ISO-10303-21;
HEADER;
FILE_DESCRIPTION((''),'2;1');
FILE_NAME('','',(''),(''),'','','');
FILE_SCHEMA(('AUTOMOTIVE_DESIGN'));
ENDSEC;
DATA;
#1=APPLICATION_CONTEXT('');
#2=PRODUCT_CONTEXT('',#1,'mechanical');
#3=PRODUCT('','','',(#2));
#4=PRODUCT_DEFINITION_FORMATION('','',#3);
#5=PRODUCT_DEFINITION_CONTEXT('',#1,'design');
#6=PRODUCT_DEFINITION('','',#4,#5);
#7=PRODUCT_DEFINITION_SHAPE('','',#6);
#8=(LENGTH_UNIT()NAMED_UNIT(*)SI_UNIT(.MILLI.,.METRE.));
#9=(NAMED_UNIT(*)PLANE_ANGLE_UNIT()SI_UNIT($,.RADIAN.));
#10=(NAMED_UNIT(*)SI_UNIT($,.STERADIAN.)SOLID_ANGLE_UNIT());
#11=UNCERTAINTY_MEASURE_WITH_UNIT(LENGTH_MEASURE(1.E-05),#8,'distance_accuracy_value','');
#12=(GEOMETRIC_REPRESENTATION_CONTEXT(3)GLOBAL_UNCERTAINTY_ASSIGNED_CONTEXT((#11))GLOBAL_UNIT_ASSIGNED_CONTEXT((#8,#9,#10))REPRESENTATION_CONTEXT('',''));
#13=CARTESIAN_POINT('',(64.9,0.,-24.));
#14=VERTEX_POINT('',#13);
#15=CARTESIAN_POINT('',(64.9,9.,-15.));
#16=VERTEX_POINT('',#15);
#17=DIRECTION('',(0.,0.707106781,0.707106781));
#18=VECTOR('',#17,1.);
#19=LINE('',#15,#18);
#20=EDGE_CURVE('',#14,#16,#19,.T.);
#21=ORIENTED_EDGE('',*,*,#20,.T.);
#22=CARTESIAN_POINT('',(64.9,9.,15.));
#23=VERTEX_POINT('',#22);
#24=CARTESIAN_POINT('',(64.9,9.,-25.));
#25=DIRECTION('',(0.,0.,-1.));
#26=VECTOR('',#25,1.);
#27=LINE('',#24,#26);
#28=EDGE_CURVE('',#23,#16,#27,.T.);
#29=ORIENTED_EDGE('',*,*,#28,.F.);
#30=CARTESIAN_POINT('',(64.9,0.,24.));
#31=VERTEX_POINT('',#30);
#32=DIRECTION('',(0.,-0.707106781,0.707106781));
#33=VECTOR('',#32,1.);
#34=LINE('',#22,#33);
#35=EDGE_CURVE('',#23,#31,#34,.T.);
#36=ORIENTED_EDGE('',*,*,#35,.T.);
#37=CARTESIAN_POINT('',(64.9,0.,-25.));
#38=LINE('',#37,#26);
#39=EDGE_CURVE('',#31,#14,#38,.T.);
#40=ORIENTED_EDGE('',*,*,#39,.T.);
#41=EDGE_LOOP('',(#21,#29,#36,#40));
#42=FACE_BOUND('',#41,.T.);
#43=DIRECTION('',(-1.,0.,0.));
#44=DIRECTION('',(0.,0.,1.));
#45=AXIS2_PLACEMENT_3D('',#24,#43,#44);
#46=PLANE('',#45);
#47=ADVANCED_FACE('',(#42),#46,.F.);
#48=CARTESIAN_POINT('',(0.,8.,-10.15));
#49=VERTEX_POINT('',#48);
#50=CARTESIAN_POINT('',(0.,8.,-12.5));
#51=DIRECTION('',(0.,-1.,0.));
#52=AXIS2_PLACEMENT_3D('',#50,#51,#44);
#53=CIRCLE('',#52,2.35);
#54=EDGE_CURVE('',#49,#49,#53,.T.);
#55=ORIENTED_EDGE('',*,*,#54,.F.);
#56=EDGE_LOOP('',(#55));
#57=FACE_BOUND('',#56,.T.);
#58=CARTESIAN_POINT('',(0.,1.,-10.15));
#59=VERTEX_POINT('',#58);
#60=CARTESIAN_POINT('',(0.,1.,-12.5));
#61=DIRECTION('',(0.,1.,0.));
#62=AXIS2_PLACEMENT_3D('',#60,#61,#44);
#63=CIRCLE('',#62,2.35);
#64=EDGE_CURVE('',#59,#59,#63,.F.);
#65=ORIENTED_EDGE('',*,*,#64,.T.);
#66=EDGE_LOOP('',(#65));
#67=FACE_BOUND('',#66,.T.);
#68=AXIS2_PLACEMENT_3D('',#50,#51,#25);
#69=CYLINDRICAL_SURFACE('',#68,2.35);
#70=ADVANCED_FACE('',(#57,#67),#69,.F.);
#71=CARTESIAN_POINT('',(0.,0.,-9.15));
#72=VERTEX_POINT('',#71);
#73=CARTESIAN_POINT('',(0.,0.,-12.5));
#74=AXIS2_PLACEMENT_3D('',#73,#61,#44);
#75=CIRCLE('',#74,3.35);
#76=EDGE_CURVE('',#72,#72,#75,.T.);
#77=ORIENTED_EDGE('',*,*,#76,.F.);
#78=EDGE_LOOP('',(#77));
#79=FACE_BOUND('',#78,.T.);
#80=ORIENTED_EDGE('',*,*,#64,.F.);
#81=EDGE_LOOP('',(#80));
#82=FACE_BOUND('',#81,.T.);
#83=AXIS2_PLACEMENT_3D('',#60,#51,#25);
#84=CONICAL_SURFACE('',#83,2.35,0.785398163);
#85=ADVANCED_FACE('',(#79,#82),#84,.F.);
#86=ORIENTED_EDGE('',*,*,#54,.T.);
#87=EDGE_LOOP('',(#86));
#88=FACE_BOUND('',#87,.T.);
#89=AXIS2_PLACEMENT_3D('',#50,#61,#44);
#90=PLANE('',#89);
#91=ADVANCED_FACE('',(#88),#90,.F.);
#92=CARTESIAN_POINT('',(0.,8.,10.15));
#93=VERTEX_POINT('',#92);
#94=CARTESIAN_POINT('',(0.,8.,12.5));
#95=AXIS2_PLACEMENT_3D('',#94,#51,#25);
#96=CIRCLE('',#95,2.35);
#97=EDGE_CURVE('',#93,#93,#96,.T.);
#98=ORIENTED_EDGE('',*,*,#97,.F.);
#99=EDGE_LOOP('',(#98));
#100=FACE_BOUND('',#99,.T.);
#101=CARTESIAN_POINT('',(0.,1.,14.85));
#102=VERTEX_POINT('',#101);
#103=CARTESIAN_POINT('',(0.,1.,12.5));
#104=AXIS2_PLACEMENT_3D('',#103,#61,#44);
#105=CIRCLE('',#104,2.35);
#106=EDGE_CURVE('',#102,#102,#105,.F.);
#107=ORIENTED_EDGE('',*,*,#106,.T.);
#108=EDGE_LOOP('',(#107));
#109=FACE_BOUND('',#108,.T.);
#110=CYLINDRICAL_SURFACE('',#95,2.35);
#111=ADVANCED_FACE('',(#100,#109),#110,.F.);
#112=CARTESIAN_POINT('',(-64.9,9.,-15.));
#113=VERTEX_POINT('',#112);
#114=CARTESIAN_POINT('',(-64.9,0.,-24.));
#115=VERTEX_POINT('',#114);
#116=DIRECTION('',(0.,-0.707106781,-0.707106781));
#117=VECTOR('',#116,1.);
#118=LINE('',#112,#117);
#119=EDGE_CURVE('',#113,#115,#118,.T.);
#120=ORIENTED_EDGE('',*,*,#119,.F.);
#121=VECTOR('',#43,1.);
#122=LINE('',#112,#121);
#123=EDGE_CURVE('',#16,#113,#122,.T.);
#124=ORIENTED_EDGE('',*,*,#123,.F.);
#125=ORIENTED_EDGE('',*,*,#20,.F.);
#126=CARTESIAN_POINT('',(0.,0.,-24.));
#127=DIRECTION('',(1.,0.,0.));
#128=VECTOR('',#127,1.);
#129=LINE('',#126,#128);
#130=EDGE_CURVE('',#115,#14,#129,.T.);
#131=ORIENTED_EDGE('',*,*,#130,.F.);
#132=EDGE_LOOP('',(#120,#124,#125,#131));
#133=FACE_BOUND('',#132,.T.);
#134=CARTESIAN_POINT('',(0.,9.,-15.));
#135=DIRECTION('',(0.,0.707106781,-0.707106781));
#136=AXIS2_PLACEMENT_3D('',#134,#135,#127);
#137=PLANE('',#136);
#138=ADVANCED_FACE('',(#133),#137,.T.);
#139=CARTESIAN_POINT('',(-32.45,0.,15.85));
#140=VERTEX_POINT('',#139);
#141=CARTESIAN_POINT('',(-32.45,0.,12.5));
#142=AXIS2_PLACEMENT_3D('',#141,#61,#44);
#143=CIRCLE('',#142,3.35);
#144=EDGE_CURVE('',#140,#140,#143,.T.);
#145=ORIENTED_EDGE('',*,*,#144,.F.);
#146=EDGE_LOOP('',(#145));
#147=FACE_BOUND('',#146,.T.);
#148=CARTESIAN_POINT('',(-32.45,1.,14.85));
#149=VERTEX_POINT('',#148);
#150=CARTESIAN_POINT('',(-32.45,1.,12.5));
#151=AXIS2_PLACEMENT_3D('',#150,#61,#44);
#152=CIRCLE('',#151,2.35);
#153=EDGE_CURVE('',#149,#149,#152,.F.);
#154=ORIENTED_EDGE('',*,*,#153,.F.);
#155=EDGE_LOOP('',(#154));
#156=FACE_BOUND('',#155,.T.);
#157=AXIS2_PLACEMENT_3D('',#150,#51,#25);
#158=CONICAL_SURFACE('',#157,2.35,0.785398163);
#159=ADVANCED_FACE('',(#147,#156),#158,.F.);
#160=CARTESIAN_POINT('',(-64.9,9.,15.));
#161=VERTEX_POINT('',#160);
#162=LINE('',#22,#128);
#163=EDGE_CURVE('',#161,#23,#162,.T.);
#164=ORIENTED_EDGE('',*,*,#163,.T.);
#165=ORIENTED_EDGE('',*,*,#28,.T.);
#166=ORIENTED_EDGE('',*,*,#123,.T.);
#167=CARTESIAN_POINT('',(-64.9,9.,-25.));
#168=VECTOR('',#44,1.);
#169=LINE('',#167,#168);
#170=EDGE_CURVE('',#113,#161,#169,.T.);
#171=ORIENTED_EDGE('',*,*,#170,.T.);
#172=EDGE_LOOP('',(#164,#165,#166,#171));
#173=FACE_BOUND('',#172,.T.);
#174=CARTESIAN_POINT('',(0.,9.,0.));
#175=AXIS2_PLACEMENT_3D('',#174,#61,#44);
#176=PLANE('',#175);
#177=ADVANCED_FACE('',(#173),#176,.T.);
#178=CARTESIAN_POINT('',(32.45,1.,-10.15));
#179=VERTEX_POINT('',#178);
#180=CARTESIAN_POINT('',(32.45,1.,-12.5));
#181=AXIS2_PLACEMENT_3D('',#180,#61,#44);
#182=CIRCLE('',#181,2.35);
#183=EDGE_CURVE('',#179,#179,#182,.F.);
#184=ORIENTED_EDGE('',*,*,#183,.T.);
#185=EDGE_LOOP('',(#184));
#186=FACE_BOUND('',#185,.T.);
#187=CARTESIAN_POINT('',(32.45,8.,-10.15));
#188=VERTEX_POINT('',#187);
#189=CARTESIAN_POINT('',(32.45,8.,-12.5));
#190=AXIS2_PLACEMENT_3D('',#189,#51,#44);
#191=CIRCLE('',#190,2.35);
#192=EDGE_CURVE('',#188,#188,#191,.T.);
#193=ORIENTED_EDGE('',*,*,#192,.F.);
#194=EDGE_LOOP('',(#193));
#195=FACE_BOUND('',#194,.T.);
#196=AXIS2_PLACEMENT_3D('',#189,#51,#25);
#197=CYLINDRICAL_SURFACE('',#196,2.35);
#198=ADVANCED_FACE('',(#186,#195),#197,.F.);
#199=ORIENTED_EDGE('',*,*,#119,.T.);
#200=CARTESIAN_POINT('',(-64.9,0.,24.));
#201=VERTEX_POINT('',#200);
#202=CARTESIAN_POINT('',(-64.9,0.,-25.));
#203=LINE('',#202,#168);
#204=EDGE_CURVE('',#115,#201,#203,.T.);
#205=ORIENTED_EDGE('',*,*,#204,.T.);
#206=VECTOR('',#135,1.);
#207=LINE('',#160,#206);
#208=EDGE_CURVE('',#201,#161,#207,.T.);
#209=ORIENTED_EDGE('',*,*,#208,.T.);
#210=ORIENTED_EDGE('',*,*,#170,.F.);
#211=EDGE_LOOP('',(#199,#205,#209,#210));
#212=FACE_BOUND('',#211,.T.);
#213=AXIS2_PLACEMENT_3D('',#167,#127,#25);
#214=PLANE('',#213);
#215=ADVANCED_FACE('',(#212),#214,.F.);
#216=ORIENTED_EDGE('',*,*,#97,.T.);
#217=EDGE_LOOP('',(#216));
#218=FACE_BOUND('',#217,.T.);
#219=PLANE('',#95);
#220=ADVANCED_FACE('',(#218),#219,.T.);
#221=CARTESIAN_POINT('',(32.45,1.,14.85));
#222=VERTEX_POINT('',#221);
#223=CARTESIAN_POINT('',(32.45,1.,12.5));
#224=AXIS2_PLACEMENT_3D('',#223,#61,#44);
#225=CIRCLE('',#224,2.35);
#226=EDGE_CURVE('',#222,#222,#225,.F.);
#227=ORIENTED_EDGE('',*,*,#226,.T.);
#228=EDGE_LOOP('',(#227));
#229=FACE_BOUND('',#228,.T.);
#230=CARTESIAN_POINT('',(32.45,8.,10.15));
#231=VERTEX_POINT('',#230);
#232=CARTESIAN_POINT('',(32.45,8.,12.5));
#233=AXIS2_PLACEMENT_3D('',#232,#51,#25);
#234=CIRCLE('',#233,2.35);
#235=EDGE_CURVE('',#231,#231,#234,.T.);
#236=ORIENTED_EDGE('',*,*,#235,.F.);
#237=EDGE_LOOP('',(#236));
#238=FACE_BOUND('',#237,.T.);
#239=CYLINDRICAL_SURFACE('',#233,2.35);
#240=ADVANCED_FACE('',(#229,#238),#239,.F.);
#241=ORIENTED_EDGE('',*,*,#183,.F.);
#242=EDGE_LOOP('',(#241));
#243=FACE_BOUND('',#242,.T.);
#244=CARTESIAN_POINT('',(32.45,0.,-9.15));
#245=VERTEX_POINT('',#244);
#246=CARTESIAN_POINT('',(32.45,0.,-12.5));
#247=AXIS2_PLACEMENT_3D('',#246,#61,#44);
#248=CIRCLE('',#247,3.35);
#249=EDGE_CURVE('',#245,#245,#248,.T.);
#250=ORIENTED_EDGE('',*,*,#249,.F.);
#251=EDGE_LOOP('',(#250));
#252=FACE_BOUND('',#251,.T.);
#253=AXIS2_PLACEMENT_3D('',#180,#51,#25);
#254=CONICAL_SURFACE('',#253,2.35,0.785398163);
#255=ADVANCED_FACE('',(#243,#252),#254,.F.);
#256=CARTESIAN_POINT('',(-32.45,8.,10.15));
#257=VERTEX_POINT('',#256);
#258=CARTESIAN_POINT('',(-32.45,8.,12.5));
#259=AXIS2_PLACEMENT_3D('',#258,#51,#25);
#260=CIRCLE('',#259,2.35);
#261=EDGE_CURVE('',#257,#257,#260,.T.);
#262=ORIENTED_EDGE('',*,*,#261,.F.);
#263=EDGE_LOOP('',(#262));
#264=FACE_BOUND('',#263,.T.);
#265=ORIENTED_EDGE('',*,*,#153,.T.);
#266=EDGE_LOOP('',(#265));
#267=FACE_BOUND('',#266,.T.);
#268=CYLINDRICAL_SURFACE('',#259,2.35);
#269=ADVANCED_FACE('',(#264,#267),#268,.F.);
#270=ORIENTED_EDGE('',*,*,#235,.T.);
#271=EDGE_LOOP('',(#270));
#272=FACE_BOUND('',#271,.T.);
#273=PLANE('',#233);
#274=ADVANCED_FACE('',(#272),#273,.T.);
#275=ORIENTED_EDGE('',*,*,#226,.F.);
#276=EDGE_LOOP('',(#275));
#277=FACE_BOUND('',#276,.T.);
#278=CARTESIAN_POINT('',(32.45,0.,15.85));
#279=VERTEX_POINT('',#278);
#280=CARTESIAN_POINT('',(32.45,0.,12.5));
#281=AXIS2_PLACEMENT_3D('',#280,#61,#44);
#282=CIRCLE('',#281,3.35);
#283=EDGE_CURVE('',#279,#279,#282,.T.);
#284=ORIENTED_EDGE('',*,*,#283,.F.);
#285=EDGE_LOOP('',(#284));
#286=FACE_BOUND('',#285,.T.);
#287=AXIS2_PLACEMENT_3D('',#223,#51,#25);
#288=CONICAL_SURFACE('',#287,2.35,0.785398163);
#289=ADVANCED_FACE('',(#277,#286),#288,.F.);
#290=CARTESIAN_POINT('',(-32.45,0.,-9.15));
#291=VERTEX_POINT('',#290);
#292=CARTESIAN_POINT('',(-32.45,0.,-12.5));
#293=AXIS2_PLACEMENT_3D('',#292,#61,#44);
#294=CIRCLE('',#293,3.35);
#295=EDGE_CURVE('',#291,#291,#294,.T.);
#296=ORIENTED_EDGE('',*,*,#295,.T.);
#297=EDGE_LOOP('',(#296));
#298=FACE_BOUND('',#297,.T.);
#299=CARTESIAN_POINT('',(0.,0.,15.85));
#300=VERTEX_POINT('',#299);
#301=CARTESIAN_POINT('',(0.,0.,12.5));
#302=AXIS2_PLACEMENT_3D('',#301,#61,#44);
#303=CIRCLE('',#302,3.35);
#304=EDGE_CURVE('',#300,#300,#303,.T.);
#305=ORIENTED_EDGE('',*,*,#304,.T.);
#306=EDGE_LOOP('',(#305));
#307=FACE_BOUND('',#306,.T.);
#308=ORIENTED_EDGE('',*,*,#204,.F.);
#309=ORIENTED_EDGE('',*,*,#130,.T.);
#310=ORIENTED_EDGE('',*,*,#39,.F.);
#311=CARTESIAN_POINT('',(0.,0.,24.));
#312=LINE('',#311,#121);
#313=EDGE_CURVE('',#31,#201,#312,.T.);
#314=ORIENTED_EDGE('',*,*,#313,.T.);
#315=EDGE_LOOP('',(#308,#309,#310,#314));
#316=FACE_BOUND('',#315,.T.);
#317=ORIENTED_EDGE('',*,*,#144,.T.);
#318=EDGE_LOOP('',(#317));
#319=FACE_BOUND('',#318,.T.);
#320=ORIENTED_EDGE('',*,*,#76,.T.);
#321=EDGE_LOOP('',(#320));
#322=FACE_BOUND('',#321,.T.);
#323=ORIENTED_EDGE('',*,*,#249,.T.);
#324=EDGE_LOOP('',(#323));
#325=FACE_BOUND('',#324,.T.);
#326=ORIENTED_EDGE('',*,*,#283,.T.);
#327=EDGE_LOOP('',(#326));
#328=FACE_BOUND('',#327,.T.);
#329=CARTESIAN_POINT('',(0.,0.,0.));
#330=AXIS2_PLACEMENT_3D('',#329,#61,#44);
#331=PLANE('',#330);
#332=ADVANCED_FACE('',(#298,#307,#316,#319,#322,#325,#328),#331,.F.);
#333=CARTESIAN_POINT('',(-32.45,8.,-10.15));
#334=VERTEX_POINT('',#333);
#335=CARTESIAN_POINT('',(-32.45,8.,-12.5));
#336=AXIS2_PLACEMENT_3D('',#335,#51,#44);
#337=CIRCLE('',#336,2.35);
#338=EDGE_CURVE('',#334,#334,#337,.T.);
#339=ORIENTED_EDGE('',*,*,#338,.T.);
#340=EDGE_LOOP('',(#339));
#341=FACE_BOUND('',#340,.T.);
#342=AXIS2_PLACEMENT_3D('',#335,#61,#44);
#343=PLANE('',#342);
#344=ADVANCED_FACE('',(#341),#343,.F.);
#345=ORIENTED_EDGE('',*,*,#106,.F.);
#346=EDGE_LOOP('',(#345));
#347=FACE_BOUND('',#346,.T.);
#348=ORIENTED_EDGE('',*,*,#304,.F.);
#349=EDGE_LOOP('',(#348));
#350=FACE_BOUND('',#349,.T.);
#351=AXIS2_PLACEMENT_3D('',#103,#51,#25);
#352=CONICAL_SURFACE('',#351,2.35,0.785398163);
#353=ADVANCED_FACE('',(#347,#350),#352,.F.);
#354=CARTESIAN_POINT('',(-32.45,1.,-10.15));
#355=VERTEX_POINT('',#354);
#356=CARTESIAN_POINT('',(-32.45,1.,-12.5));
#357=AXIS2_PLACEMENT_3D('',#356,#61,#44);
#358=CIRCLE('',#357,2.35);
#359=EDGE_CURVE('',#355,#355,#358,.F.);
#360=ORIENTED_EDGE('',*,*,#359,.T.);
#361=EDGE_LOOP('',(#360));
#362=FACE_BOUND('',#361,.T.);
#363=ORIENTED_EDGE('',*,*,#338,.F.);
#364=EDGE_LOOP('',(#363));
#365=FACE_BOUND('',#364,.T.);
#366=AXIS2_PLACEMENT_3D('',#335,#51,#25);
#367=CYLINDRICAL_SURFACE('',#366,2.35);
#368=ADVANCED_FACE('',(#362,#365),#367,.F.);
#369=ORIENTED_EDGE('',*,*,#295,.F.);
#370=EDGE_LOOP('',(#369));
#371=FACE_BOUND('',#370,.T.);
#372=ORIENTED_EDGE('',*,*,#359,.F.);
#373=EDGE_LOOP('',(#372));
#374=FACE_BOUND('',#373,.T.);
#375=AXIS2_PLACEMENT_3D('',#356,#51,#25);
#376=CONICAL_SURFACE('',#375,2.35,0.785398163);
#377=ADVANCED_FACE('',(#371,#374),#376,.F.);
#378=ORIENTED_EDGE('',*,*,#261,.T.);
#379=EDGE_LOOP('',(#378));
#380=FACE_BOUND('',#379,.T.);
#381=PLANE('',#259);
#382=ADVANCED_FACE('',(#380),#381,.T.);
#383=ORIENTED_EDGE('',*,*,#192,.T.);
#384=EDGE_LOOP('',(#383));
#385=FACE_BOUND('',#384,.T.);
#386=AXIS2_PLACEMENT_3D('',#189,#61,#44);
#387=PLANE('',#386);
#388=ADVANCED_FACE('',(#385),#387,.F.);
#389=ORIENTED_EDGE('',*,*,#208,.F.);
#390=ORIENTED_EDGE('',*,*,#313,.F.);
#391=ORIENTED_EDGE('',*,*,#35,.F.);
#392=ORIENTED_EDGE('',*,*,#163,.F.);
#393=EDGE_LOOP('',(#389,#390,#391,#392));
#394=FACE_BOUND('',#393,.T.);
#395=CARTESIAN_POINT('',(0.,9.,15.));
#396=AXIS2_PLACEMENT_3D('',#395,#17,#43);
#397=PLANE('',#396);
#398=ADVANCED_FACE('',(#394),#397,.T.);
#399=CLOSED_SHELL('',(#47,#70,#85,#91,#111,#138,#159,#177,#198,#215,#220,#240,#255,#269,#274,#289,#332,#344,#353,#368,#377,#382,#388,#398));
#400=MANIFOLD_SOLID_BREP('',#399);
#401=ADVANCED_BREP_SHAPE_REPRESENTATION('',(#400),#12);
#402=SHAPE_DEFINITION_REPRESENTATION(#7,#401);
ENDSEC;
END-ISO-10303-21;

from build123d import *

# Parameters (mm, degrees)
SKETCH1_W           = 129.8
SKETCH1_H           = 50
BOSS_EXTRUDE1_DEPTH = 9
SKETCH2_R           = 2.35
CUT_EXTRUDE1_DEPTH  = 8
CHAMFER1_SIZE       = 1
CHAMFER2_SIZE       = 10


with BuildPart() as part:
    # Sketch1 → Boss-Extrude1 (new body)
    with BuildSketch(Plane(origin=(0, 0, 0), x_dir=(1, 0, 0), z_dir=(0, 1, 0))):
        Rectangle(SKETCH1_W, SKETCH1_H)
    extrude(amount=BOSS_EXTRUDE1_DEPTH)

    # Sketch2 → Cut-Extrude1 (cut)
    with BuildSketch(Plane.XZ):
        with Locations(Location((-32.45, 12.5, 0), (0, 0, 270))):
            Circle(SKETCH2_R)
        with Locations(Location((0, 12.5, 0), (0, 0, 270))):
            Circle(SKETCH2_R)
        with Locations(Location((32.45, 12.5, 0), (0, 0, 270))):
            Circle(SKETCH2_R)
        with Locations(Location((32.45, -12.5, 0), (0, 0, 90))):
            Circle(SKETCH2_R)
        with Locations(Location((0, -12.5, 0), (0, 0, 90))):
            Circle(SKETCH2_R)
        with Locations(Location((-32.45, -12.5, 0), (0, 0, 90))):
            Circle(SKETCH2_R)
    extrude(amount=-CUT_EXTRUDE1_DEPTH, mode=Mode.SUBTRACT)

    # Chamfer1
    chamfer1_edges = [part.edges().sort_by_distance(p)[0] for p in [
        (-32.45, 0, -14.85),
        (0, 0, -14.85),
        (32.45, 0, -14.85),
        (32.45, 0, 14.85),
        (0, 0, 14.85),
        (-32.45, 0, 14.85),
    ]]
    chamfer(chamfer1_edges, length=CHAMFER1_SIZE)

    # Chamfer2
    # the kernel refuses this chamfer: 10 mm, written as the material it takes off along each edge
    with BuildSketch(Plane(origin=(90.61682988, 9, 25), x_dir=(0, -0.9996219169112968, 0.027495876610586317), z_dir=(-1, 0, 0)), Plane(origin=(-90.61682988, 9, -25), x_dir=(0, -0.9996219169112968, -0.027495876610586317), z_dir=(1, 0, 0))) as chamfer2_piece_1:
        Polygon((CHAMFER2_SIZE * 0.999621916911, -CHAMFER2_SIZE * 0.0274958766106), (-CHAMFER2_SIZE * 0.0274958766106, -CHAMFER2_SIZE * 0.999621916911), (0, 0), align=None)
    extrude(amount=181.233659759, mode=Mode.SUBTRACT)


solid = part.part
